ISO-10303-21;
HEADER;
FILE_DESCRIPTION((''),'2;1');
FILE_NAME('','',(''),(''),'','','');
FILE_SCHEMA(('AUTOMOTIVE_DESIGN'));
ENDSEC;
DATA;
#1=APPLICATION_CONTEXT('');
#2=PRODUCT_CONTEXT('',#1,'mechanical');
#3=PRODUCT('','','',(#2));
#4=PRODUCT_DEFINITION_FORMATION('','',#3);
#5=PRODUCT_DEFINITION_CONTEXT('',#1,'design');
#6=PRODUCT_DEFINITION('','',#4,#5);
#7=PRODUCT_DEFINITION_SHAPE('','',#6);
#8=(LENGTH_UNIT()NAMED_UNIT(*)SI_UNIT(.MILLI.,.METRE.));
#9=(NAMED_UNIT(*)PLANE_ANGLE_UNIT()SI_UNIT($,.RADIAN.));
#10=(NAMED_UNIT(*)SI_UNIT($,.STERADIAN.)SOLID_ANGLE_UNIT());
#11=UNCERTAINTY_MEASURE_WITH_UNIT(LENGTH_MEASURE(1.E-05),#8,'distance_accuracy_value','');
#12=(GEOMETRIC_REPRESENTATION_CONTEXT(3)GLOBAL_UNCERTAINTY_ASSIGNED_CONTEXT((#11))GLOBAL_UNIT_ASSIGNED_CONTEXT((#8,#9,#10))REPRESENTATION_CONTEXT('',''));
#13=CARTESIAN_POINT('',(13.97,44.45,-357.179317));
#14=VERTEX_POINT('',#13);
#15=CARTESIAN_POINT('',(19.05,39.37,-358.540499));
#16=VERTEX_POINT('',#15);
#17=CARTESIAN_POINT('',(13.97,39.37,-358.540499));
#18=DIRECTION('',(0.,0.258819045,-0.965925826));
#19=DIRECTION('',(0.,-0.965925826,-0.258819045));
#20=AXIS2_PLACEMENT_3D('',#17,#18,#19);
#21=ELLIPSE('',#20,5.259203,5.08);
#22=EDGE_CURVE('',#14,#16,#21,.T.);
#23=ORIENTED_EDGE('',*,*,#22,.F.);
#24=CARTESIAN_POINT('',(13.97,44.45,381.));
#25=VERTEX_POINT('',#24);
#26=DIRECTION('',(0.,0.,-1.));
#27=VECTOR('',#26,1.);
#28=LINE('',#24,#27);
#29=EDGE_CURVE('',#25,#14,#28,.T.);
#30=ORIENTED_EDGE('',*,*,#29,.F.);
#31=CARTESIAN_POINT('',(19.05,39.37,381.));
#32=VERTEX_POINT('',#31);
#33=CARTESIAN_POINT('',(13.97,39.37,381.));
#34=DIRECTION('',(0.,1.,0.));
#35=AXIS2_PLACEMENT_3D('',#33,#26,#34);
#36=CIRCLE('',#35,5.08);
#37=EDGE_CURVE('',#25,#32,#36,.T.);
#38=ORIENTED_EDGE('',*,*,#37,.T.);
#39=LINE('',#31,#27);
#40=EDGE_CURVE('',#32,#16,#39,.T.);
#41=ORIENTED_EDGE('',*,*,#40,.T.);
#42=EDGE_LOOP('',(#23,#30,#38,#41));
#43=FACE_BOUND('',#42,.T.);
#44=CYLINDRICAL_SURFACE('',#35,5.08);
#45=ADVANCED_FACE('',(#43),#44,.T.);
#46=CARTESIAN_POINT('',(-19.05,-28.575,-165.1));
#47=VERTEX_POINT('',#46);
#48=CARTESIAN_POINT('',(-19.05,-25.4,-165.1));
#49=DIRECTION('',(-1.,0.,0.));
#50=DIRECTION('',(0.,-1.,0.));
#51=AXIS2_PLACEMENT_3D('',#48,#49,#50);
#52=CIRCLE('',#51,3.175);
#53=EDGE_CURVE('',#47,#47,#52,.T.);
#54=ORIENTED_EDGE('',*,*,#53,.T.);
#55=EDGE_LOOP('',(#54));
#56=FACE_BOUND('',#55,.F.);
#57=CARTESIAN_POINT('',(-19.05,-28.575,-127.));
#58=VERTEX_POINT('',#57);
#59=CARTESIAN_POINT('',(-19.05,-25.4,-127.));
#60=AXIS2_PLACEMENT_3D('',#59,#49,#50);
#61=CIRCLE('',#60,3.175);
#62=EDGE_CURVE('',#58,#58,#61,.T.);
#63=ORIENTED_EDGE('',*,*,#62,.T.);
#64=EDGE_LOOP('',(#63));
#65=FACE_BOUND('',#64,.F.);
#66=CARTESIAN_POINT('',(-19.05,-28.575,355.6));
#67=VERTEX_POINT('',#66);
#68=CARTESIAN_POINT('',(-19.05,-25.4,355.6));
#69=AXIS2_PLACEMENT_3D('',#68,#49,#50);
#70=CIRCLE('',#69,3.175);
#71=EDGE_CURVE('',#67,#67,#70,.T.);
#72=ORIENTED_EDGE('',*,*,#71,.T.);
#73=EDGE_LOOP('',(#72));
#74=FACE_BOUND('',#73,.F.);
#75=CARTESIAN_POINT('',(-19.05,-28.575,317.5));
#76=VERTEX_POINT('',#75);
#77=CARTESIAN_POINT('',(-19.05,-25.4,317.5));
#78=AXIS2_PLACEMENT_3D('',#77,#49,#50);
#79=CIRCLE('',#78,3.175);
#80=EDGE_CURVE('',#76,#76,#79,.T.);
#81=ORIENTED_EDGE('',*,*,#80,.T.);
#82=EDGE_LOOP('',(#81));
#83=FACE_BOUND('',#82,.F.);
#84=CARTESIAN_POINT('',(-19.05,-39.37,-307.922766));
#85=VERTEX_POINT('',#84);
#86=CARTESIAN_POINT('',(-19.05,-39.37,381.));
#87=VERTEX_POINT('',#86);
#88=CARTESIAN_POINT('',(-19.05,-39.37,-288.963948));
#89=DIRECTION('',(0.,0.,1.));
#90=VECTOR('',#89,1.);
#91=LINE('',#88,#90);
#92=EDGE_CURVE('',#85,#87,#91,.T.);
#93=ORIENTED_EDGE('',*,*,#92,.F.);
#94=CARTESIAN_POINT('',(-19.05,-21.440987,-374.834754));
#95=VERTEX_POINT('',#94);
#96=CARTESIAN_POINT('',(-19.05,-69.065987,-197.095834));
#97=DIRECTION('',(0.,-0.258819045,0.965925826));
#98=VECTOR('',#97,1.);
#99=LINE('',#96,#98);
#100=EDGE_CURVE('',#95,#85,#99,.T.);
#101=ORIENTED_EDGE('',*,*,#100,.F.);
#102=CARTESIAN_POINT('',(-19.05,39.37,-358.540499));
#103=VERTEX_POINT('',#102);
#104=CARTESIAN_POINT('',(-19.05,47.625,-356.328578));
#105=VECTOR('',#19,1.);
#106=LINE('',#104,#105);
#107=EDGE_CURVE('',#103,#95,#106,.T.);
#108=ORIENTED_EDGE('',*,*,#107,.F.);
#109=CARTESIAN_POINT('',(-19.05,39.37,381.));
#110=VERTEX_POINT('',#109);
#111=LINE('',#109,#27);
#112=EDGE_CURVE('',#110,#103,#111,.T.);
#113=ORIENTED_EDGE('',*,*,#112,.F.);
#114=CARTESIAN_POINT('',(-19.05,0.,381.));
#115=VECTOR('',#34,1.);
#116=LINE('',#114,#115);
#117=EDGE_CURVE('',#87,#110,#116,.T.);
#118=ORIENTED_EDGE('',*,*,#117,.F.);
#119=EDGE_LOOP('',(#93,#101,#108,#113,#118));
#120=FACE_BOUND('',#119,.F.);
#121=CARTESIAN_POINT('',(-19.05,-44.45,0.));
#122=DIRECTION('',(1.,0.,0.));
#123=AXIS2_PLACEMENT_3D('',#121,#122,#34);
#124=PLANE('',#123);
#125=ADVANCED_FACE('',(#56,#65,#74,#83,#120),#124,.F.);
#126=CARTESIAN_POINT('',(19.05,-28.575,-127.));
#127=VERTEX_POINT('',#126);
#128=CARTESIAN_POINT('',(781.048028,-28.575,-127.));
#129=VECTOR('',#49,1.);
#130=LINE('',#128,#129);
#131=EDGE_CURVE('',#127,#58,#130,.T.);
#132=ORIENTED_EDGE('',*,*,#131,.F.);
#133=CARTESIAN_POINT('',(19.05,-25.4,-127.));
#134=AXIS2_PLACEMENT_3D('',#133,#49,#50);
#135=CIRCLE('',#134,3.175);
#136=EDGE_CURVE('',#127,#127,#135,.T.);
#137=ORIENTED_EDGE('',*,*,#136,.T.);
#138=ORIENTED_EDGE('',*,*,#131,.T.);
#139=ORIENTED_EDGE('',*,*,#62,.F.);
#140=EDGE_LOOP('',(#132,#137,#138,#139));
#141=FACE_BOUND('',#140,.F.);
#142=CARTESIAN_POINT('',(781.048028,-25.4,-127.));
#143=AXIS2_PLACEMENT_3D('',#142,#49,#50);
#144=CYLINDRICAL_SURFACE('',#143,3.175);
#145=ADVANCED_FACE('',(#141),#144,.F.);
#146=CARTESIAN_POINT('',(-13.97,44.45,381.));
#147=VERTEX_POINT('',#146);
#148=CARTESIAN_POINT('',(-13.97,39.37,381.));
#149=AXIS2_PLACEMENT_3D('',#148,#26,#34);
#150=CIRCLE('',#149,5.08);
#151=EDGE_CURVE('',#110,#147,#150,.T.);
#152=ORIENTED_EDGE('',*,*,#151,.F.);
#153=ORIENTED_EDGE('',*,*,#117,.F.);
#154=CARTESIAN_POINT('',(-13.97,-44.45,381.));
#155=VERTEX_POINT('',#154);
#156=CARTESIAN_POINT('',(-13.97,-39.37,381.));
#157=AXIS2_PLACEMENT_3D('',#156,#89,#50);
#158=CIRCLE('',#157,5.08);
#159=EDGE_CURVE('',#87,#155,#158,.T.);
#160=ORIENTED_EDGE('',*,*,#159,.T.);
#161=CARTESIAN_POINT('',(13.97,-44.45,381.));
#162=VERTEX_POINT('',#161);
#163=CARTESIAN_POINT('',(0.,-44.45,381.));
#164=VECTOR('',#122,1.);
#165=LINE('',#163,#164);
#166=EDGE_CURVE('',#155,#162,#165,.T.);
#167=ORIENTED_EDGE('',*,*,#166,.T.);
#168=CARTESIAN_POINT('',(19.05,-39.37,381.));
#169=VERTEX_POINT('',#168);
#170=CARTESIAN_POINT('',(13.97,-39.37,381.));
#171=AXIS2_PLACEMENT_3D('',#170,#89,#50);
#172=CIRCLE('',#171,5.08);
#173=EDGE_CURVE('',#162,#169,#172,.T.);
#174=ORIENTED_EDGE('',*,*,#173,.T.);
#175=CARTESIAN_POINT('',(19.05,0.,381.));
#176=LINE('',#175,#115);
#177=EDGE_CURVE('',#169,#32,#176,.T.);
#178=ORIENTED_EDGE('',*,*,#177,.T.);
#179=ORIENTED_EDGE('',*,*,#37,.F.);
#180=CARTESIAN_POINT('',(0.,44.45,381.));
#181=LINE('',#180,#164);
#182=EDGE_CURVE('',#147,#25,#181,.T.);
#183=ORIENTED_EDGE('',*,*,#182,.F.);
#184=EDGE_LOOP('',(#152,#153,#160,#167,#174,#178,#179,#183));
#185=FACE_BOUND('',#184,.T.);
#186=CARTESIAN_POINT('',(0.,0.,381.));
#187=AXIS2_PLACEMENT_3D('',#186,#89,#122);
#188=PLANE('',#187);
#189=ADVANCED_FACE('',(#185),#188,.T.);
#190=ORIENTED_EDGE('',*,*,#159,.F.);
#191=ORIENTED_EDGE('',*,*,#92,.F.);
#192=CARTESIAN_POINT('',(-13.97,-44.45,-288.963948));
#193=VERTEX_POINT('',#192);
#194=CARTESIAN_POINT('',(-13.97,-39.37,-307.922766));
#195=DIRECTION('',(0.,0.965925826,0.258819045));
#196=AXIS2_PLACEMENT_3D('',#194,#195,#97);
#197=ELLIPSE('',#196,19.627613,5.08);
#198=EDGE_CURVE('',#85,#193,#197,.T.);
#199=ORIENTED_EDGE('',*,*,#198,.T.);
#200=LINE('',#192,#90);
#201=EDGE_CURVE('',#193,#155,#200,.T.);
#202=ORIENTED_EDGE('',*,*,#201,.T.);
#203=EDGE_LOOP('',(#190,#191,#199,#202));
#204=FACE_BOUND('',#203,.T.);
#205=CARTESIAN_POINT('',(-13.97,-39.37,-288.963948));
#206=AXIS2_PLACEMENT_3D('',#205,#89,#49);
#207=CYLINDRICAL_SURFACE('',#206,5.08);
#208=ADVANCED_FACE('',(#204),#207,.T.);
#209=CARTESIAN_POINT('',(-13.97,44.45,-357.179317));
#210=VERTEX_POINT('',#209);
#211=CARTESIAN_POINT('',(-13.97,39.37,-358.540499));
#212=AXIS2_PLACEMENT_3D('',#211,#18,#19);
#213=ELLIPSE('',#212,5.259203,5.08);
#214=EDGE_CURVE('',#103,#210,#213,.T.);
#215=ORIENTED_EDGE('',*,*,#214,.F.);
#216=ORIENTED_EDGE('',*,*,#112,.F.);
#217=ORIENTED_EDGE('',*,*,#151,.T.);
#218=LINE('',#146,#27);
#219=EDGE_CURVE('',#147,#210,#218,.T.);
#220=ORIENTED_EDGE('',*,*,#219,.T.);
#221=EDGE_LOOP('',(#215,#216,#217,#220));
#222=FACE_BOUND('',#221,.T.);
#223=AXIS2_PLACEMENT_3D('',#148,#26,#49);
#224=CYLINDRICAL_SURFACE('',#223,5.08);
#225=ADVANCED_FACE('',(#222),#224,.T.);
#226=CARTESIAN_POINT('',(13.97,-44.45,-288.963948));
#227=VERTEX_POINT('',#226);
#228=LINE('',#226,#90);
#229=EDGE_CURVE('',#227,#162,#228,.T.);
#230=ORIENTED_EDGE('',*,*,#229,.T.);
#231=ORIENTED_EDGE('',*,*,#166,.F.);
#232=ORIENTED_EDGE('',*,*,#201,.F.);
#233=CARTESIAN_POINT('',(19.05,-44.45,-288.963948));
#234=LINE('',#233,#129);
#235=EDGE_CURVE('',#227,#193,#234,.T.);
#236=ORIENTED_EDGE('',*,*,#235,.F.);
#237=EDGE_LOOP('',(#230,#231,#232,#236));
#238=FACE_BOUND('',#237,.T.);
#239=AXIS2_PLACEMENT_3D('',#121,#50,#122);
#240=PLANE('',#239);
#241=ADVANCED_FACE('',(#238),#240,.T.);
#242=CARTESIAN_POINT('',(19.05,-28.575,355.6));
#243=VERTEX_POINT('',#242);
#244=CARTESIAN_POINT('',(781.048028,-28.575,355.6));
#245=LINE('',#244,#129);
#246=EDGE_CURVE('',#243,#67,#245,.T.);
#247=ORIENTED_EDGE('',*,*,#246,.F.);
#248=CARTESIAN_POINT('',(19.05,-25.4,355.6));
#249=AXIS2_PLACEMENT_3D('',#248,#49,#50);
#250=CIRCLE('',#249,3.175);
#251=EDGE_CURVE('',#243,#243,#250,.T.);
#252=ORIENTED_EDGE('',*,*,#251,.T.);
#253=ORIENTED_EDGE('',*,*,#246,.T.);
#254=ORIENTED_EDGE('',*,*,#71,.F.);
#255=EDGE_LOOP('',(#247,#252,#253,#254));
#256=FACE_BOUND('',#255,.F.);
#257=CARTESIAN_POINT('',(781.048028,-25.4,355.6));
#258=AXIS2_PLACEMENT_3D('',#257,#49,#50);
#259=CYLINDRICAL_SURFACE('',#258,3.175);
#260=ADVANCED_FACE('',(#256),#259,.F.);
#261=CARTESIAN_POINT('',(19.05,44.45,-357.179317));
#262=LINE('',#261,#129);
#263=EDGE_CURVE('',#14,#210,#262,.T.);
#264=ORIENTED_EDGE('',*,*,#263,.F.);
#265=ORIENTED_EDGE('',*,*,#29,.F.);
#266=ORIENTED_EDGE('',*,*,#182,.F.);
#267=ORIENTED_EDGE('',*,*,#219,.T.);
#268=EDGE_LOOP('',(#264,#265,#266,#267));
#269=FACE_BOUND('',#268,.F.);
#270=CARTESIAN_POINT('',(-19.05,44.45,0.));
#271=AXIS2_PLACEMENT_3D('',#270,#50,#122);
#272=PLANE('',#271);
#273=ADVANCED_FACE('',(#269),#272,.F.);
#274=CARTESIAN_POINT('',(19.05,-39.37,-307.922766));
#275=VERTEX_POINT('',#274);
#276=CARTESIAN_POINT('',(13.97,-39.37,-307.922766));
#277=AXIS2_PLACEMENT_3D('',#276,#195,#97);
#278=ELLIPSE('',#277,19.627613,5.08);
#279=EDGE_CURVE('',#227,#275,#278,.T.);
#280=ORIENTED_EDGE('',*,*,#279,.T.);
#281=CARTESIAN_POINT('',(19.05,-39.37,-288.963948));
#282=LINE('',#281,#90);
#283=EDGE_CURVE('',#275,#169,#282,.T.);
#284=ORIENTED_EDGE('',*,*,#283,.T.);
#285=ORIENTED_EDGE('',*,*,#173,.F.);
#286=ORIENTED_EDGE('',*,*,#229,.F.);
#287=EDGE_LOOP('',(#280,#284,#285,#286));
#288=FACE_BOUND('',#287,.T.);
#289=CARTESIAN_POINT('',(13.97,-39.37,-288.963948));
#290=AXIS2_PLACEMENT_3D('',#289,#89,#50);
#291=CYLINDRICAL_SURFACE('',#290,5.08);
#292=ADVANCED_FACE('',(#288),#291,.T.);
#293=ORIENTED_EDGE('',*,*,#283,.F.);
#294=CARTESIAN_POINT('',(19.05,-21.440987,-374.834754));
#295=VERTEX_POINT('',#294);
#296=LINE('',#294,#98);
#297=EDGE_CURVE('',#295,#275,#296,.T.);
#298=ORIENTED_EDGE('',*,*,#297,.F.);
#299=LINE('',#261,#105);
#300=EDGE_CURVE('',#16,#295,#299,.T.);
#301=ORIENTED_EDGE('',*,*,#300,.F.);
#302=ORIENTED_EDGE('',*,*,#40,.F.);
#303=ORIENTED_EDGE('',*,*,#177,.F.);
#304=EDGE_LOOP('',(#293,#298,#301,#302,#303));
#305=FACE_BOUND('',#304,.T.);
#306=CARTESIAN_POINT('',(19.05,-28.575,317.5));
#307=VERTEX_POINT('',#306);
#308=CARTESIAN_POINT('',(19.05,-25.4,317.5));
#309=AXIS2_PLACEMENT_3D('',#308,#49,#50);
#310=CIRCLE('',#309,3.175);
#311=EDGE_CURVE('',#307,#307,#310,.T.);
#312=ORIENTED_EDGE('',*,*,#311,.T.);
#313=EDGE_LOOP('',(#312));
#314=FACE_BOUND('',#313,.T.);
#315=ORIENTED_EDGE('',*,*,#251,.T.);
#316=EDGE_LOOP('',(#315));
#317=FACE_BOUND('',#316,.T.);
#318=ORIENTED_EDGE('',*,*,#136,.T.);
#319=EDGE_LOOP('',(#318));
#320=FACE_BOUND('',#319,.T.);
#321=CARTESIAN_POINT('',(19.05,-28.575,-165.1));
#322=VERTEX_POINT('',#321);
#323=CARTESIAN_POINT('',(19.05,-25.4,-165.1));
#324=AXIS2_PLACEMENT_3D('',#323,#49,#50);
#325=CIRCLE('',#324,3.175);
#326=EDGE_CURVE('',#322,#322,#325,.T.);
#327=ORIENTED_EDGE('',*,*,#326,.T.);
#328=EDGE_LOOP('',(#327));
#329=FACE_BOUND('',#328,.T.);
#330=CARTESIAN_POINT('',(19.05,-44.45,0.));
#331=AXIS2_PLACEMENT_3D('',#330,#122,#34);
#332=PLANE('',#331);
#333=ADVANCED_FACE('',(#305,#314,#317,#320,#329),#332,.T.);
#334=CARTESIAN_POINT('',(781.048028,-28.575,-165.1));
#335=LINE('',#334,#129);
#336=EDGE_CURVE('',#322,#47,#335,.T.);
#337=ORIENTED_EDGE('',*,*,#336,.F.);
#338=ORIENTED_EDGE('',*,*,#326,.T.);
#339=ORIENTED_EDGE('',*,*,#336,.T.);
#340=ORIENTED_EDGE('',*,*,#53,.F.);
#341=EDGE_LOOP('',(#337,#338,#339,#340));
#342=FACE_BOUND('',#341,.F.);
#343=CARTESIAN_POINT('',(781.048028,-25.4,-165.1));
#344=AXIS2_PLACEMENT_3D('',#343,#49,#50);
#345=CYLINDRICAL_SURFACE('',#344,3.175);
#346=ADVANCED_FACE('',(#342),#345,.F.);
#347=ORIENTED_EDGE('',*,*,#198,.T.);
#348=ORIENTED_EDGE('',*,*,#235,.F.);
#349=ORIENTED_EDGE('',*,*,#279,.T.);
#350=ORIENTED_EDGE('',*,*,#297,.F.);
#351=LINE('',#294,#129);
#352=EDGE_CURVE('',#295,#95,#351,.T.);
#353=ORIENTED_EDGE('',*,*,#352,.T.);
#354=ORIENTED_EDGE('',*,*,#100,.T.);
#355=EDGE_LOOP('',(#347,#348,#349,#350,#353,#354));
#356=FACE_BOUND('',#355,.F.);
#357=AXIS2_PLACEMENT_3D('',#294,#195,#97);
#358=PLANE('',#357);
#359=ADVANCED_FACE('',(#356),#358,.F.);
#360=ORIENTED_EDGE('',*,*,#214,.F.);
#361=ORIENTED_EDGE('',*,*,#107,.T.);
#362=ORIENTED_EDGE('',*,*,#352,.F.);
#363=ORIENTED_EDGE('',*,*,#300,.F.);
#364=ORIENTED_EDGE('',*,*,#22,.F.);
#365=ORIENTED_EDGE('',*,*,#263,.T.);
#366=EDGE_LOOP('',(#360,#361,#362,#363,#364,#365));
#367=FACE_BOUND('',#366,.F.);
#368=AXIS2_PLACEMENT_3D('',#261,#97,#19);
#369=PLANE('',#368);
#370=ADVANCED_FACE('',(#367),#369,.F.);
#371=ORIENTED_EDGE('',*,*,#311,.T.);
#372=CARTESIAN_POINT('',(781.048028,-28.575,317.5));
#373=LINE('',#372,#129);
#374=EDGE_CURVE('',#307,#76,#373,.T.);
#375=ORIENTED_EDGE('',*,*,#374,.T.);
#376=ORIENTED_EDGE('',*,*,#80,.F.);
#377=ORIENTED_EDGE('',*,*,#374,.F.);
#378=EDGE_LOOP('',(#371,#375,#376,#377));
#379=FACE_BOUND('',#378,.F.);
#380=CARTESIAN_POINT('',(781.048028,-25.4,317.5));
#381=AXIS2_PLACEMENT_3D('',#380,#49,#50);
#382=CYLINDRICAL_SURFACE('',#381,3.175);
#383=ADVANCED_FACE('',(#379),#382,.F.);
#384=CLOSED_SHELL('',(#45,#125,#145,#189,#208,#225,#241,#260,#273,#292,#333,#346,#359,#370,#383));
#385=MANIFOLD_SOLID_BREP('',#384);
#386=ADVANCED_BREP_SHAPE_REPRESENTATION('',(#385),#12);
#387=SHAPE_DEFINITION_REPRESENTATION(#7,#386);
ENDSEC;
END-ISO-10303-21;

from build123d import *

# Parameters (mm, degrees)
F0_W     = 38.1
F0_H     = 88.9
F1_DEPTH = 381
F3_DEPTH = 38.101
F4_R     = 5.08
F6_D     = 6.35


# Not quite as in the source:
# - a feature names something its author has since deleted; it is built from what else it names


with BuildPart() as f1:
    # F0 (on Top) → F1 (new body, symmetric)
    with BuildSketch(Plane.XY):
        Rectangle(F0_W, F0_H)
    extrude(amount=F1_DEPTH, both=True)

    # F2 (on face) → F3 (cut, through all)
    with BuildSketch(Plane.YZ.offset(19.05)):
        Polygon((-21.4409868904, -374.8347535186), (-44.45, -381), (44.45, -381), (44.45, -357.1793167929), align=None)
        Polygon((-44.45, -288.9639475615), (-44.45, -381), (-21.4409868904, -374.8347535186), align=None)
    extrude(amount=-F3_DEPTH, mode=Mode.SUBTRACT)

    # F4
    f4_edges = [f1.edges().sort_by_distance(p)[0] for p in [
        (19.05, -44.45, 46.018026),
        (-19.05, -44.45, 46.018026),
        (19.05, 44.45, 11.910342),
        (-19.05, 44.45, 11.910342),
    ]]
    fillet(f4_edges, radius=F4_R)

    # F6 (through all)
    with Locations(Plane.YZ.offset(19.05)):
        with Locations((-25.4, 355.6), (-25.4, 317.5), (-25.4, -127), (-25.4, -165.1)):
            Hole(F6_D / 2)


solid = f1.part
